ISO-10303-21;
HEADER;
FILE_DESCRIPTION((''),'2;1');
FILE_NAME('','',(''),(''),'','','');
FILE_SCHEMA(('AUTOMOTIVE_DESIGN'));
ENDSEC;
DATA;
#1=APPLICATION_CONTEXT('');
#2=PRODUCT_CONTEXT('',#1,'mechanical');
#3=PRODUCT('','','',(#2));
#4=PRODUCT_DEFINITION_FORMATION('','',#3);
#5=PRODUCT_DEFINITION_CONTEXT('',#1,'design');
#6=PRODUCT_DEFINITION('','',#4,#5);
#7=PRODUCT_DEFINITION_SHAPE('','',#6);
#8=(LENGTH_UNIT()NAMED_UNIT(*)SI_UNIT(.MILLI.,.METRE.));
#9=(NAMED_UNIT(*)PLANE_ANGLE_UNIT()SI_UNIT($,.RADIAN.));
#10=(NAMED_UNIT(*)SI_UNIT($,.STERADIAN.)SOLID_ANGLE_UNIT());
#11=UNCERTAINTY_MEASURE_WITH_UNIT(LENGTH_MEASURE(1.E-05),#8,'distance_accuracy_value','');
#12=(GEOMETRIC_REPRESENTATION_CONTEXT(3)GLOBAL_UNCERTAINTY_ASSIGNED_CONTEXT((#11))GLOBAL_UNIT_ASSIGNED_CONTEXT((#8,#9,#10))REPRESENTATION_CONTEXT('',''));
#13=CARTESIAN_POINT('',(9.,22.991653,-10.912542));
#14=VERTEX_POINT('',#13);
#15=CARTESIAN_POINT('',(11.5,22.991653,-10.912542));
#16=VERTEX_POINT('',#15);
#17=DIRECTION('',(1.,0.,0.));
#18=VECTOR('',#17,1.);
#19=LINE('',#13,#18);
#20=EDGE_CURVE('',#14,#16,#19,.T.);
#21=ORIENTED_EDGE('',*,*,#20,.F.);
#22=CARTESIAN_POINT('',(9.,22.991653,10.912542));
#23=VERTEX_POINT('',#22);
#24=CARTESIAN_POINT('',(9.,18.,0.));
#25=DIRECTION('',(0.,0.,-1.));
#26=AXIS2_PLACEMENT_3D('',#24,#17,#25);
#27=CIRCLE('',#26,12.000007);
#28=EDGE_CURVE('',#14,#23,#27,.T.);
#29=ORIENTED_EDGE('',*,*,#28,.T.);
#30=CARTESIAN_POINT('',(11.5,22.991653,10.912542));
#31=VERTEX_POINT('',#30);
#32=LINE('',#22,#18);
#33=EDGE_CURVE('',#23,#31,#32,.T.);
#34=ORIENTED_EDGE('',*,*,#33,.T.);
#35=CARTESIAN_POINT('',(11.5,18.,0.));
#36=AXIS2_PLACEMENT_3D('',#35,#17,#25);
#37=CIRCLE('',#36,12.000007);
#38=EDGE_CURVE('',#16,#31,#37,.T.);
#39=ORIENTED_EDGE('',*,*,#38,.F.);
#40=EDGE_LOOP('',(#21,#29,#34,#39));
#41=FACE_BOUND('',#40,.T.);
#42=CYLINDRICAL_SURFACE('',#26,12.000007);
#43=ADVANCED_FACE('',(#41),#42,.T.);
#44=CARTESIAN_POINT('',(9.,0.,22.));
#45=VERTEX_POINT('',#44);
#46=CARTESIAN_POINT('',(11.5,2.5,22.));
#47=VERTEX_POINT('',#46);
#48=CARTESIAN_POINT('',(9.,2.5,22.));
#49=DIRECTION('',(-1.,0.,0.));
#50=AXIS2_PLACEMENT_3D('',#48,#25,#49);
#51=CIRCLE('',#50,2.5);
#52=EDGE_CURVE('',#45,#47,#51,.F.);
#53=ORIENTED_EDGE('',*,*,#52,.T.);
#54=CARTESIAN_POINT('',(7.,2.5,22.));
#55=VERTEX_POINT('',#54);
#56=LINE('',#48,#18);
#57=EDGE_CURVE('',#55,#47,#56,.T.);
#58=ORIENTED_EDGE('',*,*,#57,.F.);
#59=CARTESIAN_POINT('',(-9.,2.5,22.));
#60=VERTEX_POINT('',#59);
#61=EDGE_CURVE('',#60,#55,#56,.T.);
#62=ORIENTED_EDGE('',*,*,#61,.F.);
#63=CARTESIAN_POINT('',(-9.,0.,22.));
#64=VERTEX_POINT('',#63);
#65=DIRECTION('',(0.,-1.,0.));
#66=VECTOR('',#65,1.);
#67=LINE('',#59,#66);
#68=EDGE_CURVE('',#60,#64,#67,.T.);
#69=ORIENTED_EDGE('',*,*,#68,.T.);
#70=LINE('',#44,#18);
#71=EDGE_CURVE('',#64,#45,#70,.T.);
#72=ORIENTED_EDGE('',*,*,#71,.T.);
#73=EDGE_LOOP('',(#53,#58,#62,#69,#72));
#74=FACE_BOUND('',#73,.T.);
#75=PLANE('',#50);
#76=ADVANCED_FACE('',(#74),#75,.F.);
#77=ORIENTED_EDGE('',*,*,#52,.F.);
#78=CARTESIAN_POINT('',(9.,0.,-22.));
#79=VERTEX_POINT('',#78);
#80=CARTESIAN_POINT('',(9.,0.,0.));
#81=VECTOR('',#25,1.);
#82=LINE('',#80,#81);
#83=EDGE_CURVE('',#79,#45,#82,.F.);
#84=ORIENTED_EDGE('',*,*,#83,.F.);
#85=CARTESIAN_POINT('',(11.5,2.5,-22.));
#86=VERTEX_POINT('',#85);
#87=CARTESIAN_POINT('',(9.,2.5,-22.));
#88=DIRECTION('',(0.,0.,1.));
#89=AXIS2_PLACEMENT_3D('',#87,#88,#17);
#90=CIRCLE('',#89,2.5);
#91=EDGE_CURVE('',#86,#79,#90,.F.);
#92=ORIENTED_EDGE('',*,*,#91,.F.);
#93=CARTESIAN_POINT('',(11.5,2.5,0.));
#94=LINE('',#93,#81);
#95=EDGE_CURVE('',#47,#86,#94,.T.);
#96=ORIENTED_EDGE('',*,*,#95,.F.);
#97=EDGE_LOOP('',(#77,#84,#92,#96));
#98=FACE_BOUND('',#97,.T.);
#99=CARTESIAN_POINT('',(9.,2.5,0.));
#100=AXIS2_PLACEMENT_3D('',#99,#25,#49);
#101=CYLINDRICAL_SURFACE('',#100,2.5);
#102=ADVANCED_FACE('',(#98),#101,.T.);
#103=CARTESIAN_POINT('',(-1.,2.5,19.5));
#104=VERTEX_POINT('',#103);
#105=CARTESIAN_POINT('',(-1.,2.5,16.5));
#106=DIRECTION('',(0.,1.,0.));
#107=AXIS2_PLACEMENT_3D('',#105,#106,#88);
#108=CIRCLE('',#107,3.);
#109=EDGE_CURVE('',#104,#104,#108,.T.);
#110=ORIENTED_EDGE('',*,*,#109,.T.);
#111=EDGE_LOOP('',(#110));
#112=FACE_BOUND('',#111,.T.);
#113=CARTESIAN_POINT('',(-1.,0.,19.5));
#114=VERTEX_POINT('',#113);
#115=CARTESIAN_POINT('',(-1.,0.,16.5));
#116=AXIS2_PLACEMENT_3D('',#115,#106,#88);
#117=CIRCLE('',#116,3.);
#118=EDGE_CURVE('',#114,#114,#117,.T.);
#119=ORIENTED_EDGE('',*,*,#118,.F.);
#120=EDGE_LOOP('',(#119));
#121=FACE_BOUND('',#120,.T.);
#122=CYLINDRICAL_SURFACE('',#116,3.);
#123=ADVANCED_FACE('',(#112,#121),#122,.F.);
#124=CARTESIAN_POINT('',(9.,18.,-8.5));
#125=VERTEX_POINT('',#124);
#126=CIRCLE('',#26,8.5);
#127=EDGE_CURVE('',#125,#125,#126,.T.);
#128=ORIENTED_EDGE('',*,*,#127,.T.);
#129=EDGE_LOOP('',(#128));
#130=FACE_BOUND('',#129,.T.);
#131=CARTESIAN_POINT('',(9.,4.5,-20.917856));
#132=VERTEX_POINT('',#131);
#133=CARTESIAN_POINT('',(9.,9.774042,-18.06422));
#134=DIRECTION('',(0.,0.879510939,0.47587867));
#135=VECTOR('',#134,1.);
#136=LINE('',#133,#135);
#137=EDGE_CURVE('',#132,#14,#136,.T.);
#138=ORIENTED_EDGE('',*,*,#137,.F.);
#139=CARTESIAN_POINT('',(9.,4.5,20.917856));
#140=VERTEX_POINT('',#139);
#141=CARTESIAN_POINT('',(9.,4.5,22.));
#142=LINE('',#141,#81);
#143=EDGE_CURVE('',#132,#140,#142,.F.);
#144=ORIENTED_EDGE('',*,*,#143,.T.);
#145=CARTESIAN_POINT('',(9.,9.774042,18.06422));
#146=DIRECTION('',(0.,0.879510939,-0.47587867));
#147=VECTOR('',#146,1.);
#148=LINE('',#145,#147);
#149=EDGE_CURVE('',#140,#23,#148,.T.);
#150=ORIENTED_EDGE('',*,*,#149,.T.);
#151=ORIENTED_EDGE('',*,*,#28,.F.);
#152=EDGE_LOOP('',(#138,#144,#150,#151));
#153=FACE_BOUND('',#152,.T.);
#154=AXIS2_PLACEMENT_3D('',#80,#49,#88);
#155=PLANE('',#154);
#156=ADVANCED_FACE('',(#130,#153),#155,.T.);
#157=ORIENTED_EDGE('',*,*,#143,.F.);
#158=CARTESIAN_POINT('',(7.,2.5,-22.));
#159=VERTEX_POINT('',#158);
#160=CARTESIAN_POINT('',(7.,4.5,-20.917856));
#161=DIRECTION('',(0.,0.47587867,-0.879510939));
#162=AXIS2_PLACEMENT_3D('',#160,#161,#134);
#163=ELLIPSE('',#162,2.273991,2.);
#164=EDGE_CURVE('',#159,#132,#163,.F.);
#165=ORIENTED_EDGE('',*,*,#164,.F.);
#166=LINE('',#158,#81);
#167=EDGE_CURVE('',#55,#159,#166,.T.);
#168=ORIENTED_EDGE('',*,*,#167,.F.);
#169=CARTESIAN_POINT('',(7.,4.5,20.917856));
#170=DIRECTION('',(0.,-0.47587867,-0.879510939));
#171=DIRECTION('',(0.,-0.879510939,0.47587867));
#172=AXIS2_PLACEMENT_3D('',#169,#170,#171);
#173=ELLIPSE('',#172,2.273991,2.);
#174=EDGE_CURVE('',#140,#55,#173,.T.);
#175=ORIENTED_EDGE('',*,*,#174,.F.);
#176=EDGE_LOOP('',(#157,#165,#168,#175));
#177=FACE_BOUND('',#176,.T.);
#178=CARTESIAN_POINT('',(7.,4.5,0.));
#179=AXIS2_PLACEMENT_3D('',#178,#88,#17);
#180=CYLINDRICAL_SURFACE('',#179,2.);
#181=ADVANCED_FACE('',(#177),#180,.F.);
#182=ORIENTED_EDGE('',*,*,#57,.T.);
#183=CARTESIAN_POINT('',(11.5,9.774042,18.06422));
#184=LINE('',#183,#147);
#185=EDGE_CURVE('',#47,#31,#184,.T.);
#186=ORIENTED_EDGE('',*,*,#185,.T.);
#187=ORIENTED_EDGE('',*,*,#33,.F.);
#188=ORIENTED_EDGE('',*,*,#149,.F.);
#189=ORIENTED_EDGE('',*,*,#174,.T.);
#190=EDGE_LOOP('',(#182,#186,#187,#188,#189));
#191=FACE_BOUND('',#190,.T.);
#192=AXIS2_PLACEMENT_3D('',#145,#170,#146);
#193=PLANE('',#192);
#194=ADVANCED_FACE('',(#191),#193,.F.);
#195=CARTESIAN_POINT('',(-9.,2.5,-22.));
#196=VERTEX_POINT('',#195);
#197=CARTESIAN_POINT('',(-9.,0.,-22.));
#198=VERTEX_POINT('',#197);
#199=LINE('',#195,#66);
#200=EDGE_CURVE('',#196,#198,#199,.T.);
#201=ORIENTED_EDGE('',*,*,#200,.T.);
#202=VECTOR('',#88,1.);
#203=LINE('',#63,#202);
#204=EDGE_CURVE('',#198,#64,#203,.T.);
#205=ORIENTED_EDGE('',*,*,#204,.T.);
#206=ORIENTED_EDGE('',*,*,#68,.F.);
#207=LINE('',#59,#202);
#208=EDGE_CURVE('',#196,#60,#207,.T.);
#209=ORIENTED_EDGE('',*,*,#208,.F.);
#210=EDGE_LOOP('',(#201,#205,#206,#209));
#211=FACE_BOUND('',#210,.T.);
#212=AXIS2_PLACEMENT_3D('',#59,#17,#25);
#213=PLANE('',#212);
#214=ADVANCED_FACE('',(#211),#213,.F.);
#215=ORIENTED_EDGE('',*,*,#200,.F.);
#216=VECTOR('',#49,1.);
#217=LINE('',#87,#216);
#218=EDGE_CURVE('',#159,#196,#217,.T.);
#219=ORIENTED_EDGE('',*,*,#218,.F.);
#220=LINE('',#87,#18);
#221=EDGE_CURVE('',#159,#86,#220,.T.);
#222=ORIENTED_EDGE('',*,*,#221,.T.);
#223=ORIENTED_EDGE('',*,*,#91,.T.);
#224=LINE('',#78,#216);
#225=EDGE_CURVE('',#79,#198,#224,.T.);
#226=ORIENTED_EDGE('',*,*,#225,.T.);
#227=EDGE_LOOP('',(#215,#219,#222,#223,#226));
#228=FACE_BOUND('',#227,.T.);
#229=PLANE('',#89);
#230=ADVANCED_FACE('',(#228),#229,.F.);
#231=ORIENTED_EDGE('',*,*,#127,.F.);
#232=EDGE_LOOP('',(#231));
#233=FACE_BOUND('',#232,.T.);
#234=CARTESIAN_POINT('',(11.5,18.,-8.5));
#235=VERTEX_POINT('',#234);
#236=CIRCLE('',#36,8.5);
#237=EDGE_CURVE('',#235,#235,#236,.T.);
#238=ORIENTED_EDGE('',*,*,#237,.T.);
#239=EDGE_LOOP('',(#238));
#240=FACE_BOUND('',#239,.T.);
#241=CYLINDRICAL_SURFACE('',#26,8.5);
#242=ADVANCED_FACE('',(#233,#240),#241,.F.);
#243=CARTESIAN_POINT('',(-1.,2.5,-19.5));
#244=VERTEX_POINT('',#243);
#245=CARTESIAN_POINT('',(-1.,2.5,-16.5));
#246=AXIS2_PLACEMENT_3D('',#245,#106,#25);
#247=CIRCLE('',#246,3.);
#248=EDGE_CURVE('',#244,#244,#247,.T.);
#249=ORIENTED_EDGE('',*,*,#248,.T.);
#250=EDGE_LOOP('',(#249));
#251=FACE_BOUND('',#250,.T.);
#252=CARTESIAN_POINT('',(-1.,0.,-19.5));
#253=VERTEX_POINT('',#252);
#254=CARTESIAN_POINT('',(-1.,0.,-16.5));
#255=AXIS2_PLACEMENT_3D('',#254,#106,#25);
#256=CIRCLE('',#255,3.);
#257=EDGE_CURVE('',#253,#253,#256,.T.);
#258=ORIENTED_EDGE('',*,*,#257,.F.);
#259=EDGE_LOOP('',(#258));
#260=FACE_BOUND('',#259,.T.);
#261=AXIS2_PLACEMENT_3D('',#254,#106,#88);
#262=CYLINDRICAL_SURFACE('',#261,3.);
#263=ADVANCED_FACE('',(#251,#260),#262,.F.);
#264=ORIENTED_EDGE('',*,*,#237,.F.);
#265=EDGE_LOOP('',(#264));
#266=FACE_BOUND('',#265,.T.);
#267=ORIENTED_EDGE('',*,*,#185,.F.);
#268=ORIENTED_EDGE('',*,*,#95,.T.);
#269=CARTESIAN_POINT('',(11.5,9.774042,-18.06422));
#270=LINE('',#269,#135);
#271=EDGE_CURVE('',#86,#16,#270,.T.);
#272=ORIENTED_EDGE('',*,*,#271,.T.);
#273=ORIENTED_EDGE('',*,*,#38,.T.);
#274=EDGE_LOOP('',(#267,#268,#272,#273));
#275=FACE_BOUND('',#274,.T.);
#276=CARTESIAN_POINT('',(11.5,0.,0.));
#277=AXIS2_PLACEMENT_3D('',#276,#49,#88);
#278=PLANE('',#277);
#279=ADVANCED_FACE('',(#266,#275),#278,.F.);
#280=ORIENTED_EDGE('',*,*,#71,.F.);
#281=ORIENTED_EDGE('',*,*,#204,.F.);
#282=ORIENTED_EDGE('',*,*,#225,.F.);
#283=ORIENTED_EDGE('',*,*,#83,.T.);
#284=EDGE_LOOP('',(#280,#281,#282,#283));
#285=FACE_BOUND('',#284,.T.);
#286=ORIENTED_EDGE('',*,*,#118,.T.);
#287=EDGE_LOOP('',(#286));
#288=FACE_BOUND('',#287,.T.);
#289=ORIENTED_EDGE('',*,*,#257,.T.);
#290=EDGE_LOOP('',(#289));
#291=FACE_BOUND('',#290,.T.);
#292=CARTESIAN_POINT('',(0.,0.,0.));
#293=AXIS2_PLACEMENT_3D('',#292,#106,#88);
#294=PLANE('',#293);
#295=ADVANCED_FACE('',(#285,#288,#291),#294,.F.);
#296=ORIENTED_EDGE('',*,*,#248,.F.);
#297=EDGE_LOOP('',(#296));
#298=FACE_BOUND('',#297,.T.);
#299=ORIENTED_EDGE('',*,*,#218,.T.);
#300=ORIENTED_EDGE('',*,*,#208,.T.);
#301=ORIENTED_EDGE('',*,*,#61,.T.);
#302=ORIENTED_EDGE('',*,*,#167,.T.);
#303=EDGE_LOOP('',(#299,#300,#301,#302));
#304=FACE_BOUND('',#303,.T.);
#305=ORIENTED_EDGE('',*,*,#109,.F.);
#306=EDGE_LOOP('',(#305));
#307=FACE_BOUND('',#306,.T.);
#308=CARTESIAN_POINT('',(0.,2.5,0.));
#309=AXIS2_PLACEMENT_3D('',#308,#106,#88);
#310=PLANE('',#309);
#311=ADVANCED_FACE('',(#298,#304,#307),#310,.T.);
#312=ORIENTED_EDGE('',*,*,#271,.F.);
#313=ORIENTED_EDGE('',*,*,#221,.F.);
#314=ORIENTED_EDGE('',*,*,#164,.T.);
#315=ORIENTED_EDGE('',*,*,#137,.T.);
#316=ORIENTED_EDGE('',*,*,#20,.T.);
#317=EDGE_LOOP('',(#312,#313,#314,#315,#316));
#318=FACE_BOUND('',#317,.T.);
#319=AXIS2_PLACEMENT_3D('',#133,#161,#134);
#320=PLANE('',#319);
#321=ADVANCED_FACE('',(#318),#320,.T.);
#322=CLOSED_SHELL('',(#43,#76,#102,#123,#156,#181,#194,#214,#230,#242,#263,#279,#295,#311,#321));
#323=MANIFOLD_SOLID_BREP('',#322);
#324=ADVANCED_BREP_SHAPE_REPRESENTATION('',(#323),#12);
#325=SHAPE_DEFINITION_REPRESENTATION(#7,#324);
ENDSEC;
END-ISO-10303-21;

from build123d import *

# Parameters (mm, degrees)
SKETCH1_W              = 18
SKETCH1_H              = 44
BOSS_EXTRUDE1_DEPTH    = 2.5
SKETCH2_R              = 3
CUT_EXTRUDE1_DEPTH     = 2.5
SKETCH3_W              = 44
SKETCH3_H              = 30
BOSS_EXTRUDE2_DEPTH    = 2.5
CUT_EXTRUDE2_START     = -2.5
CUT_EXTRUDE2_OUTLINE_R = 8.5
CUT_EXTRUDE2_DEPTH     = 2.5
FILLET7_R              = 2.5
FILLET8_R              = 2


# Read off the part's stored shape, not the designer's step: Cut-Extrude2
with BuildPart() as part:
    # Sketch1 → Boss-Extrude1 (new body)
    with BuildSketch(Plane(origin=(0, 0, 0), x_dir=(1, 0, 0), z_dir=(0, 1, 0))):
        Rectangle(SKETCH1_W, SKETCH1_H)
    extrude(amount=BOSS_EXTRUDE1_DEPTH)

    # Sketch2 → Cut-Extrude1 (cut)
    with BuildSketch(Plane(origin=(0, 2.5, 0), x_dir=(1, 0, 0), z_dir=(0, 1, 0))):
        with Locations(Location((-1, -16.5, 0), (0, 0, 270))):
            Circle(SKETCH2_R)
        with Locations(Location((-1, 16.5, 0), (0, 0, 90))):
            Circle(SKETCH2_R)
    extrude(amount=-CUT_EXTRUDE1_DEPTH, mode=Mode.SUBTRACT)

    # Sketch3 → Boss-Extrude2 (add)
    with BuildSketch(Plane(origin=(9, 0, 0), x_dir=(0, 0, -1), z_dir=(1, 0, 0))):
        with Locations((0, 15)):
            Rectangle(SKETCH3_W, SKETCH3_H)
    extrude(amount=BOSS_EXTRUDE2_DEPTH)

    # Cut-Extrude2 outline → Cut-Extrude2 (cut)
    with BuildSketch(Plane(origin=(11.5, 0, 0), x_dir=(0, 0, -1), z_dir=(1, 0, 0)).offset(CUT_EXTRUDE2_START)):
        with BuildLine():
            ThreePointArc((-10.912541818, 22.991653356), (-6.484608549, 28.09703046), (0, 30.000007173))
            Line((0, 30.000007173), (-22, 30))
            Line((-22, 30), (-22, 2.5))
            Line((-22, 2.5), (-10.912541818, 22.991653356))
        make_face()
        with BuildLine():
            ThreePointArc((0, 30.000007173), (6.484608549, 28.09703046), (10.912541818, 22.991653356))
            Line((10.912541818, 22.991653356), (22, 2.5))
            Line((22, 2.5), (22, 30))
            Line((22, 30), (0, 30.000007173))
        make_face()
        with Locations((0, 18)):
            Circle(CUT_EXTRUDE2_OUTLINE_R)
    extrude(amount=CUT_EXTRUDE2_DEPTH, mode=Mode.SUBTRACT)

    # Fillet7
    fillet7_edges = [part.edges().sort_by_distance(p)[0] for p in [
        (11.5, 0, 0),
    ]]
    fillet(fillet7_edges, radius=FILLET7_R)

    # Fillet8
    fillet8_edges = [part.edges().sort_by_distance(p)[0] for p in [
        (9, 2.5, 0),
    ]]
    fillet(fillet8_edges, radius=FILLET8_R)


solid = part.part
